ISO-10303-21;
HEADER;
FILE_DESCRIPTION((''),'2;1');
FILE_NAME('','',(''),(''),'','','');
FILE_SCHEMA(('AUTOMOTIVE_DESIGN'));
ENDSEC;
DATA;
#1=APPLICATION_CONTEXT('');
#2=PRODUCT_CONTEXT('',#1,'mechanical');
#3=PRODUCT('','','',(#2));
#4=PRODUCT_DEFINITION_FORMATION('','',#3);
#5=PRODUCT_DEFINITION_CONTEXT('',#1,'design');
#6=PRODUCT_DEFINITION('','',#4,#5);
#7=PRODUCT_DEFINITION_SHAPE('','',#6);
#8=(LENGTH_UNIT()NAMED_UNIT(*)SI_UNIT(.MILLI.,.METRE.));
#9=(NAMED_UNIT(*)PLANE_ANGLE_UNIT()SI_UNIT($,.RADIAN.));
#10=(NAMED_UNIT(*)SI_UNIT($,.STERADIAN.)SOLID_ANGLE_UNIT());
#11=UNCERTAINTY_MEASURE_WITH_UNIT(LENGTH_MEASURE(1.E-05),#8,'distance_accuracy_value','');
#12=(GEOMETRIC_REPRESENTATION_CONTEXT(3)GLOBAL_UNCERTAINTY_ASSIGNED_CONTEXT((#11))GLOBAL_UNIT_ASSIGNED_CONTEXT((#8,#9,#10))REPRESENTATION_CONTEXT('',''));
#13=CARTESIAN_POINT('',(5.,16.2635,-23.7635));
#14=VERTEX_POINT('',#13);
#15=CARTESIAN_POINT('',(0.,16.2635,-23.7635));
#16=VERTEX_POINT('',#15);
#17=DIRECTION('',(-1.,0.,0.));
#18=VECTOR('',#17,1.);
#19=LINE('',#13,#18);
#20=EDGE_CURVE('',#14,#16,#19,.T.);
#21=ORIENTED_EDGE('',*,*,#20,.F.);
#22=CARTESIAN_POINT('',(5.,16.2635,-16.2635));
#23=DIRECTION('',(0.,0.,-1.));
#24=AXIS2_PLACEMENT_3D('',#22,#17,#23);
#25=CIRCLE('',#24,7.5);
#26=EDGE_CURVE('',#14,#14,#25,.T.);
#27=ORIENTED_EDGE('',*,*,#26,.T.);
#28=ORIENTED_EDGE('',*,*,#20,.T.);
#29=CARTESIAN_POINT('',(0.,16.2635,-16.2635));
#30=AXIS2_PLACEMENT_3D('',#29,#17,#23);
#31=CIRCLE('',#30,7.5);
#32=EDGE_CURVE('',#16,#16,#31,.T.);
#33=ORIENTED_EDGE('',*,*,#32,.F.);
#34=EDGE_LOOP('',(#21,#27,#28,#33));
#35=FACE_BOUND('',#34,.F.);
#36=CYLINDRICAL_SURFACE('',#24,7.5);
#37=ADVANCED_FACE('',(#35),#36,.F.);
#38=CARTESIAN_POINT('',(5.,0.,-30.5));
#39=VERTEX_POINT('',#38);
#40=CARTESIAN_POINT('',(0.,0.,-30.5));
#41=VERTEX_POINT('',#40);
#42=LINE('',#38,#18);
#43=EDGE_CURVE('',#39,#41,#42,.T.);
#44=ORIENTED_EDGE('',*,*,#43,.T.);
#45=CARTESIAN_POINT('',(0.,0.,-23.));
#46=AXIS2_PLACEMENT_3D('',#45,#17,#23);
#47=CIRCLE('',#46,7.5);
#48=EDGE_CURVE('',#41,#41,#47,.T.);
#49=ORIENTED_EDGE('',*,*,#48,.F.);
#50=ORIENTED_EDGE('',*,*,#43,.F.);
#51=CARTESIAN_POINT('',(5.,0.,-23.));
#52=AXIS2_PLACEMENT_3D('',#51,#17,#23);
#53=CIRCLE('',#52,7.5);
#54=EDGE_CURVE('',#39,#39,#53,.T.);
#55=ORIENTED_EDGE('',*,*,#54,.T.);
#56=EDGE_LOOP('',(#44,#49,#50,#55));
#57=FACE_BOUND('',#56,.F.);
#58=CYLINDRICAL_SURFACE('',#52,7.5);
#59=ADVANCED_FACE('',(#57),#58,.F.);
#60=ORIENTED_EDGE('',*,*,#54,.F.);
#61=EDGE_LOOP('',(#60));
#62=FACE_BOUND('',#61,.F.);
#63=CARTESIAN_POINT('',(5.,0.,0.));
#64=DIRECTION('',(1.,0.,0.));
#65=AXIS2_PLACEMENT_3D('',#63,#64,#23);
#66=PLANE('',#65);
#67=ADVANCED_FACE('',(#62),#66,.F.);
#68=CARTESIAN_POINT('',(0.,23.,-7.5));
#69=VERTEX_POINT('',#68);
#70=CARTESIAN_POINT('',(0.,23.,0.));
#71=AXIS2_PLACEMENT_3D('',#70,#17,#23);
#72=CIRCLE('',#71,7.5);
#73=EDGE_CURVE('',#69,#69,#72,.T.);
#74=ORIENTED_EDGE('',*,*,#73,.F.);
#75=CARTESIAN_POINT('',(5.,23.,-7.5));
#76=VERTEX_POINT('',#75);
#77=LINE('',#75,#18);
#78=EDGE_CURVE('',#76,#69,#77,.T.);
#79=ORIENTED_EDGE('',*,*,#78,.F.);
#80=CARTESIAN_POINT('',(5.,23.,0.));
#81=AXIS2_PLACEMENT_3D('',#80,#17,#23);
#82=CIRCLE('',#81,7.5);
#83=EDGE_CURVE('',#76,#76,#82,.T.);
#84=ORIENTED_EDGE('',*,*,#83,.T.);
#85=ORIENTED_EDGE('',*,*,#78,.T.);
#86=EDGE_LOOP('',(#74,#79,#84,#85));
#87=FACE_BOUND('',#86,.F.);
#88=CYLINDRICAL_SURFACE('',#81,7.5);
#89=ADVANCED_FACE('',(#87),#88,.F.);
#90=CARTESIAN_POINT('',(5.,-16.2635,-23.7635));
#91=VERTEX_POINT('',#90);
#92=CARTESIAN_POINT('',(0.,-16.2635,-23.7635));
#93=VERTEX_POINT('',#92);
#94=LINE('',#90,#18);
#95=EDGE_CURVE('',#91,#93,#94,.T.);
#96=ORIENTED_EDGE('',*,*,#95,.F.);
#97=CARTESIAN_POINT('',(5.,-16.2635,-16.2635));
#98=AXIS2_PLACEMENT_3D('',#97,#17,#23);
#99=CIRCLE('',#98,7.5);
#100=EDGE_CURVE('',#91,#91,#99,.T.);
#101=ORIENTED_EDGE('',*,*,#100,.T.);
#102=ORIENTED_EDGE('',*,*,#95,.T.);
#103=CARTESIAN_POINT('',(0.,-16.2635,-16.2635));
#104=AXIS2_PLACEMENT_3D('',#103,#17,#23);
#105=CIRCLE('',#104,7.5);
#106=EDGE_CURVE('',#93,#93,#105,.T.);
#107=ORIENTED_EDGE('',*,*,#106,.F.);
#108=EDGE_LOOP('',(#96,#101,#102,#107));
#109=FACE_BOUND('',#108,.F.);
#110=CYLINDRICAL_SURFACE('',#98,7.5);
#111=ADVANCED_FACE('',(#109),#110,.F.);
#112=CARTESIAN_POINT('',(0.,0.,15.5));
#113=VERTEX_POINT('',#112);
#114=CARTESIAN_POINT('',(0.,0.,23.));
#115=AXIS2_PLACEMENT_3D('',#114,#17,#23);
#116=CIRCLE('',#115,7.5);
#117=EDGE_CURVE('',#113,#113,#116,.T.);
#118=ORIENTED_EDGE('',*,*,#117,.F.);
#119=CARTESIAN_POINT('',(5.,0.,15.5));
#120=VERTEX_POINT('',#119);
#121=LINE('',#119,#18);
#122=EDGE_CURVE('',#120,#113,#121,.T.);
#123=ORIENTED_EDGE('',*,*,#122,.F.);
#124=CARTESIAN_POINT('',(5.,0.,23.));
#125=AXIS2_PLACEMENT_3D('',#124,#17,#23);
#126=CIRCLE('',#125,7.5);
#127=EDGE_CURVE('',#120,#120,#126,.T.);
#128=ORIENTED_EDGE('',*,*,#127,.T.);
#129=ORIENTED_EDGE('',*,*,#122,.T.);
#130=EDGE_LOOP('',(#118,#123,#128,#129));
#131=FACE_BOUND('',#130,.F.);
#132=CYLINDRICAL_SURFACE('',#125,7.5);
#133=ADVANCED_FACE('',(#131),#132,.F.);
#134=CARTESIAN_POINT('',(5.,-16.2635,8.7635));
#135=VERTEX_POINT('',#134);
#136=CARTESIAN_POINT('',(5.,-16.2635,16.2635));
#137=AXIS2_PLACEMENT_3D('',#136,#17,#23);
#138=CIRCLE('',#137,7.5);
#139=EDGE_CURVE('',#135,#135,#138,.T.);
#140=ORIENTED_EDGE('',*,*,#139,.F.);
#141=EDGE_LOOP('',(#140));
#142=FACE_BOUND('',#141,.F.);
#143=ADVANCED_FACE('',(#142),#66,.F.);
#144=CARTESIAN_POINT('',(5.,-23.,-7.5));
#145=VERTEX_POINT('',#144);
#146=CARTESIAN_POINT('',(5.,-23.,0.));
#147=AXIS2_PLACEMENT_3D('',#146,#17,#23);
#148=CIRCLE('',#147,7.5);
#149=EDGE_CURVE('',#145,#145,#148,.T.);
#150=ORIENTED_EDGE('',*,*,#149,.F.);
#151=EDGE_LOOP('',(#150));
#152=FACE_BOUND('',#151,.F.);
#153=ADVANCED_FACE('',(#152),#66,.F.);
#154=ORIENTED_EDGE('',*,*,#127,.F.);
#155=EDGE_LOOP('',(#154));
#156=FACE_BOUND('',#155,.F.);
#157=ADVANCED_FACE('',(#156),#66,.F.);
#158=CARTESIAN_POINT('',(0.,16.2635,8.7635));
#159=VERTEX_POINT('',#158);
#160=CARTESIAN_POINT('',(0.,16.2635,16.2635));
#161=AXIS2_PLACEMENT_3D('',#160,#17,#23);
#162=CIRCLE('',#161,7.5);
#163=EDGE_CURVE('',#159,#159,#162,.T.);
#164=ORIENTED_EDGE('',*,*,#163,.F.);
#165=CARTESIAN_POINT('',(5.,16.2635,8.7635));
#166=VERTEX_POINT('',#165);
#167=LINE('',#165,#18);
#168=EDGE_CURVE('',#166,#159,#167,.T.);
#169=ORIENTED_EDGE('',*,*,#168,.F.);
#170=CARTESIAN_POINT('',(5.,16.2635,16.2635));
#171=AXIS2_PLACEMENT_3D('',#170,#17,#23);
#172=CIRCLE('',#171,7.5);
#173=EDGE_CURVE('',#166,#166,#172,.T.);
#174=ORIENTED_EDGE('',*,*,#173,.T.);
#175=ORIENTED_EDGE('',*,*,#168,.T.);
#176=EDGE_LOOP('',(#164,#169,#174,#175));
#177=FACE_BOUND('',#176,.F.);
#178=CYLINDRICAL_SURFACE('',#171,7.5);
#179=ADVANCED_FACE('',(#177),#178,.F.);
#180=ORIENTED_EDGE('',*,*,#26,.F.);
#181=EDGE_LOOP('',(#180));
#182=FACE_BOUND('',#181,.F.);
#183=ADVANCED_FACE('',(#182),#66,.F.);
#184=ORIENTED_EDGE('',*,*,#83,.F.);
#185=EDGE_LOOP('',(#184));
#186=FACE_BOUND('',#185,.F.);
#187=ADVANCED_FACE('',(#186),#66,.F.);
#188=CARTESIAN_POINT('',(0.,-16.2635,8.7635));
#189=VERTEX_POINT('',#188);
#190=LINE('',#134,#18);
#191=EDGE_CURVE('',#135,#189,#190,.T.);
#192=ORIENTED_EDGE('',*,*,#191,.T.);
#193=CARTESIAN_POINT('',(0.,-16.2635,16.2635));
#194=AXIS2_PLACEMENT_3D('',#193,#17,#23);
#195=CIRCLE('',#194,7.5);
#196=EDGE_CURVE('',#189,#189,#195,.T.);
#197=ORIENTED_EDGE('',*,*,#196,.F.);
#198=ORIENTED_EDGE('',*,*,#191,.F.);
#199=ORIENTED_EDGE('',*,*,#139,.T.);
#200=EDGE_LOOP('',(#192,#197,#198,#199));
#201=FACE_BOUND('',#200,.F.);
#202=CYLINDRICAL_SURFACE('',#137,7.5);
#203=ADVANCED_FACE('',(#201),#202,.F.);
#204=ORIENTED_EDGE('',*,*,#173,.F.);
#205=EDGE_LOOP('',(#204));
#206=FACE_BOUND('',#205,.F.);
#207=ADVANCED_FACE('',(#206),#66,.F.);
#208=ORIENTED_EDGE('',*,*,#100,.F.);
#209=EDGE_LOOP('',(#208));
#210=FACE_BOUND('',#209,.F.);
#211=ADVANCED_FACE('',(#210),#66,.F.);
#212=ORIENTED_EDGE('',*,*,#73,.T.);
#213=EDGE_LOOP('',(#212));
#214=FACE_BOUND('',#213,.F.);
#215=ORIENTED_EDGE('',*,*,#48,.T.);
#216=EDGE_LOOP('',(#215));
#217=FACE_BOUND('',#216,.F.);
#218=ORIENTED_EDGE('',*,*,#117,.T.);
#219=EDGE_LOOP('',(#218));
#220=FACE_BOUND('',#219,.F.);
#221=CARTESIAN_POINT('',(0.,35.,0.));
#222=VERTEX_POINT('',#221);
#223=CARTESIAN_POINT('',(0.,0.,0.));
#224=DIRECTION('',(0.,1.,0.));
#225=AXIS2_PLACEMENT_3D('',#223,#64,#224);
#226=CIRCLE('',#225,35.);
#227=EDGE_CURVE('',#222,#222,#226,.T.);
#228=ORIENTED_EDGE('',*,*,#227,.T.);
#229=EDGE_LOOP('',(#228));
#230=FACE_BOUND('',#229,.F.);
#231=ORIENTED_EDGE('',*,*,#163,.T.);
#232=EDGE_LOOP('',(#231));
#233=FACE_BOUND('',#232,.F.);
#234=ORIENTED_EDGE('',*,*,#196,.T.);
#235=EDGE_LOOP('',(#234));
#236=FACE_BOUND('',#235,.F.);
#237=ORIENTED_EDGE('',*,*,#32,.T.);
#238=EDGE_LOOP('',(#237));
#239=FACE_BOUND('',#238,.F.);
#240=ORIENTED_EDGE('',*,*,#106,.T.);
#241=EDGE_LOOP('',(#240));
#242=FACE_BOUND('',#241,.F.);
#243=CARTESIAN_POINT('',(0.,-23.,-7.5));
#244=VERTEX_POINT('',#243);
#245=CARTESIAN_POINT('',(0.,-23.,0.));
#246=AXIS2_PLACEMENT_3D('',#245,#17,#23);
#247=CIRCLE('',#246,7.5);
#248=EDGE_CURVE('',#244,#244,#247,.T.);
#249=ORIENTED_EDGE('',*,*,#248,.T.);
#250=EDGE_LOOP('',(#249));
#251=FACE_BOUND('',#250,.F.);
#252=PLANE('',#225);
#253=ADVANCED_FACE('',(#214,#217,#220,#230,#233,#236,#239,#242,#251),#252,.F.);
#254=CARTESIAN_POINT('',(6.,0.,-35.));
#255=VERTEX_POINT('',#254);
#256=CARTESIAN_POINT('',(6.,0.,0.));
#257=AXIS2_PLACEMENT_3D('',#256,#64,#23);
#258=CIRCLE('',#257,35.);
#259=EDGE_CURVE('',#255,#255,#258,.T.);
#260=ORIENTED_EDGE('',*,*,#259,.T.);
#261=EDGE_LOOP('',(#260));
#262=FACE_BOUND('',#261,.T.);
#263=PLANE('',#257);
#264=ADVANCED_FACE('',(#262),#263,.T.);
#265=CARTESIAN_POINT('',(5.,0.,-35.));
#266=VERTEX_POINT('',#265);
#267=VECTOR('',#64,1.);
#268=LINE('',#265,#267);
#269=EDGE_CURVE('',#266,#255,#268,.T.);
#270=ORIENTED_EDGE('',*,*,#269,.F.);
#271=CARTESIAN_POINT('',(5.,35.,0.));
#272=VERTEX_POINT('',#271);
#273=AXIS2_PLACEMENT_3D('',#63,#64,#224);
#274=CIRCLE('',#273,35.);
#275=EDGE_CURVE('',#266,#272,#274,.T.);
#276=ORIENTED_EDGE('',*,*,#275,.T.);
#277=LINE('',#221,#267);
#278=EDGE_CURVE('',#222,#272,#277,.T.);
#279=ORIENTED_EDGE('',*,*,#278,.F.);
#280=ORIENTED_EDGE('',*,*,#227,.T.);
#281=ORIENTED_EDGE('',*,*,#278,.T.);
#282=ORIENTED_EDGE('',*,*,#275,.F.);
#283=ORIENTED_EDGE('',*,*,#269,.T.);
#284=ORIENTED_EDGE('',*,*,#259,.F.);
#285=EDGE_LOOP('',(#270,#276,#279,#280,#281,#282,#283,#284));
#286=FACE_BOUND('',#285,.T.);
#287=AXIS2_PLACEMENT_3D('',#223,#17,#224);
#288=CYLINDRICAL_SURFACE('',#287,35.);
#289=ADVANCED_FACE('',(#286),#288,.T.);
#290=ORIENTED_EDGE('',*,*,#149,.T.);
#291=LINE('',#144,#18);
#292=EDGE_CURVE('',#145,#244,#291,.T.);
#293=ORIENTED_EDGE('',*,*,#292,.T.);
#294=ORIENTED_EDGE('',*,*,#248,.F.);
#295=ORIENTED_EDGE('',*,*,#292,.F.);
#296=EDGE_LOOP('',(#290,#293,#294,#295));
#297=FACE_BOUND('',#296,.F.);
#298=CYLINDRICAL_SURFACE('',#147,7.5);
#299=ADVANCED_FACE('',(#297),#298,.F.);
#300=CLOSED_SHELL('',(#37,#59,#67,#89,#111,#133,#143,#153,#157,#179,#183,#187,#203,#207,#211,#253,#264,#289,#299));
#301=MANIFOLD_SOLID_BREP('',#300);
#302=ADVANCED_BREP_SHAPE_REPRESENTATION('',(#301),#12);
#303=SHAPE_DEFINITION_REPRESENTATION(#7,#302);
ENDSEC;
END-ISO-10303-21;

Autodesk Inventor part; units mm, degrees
ref_plane "YZ Plane" through (0, 0, 0) normal (1, 0, 0) x (0, 1, 0)
ref_plane "XZ Plane" through (0, 0, 0) normal (0, 1, 0) x (-1, 0, 0)
ref_plane "XY Plane" through (0, 0, 0) normal (0, 0, 1) x (1, 0, 0)
sketch "Sketch1" plane through (0, 0, 0) normal (1, 0, 0) x (0, 1, 0)
  circle A0 centre (0, 0) radius 35
  dimension "d0" = 70
extrude "Extrusion1" add sketch "Sketch1" along normal blind 5
sketch "Sketch2" plane through (5, 0, 0) normal (1, 0, 0) x (0, 0, -1)
  circle A0 centre (0, 0) radius 35 projected
  circle A1 centre (0, 0) radius 23 construction
  point P0 (23, 0)
  point P1 (16.2635, 16.2635)
  point P2 (0, 23)
  point P3 (-16.2635, 16.2635)
  point P4 (-23, 0)
  point P5 (-16.2635, -16.2635)
  point P6 (0, -23)
  point P7 (16.2635, -16.2635)
  dimension "d3" = 46
  dimension "d6" = 360
hole "Hole1" at (5, 0, -23) at (5, 16.2635, -16.2635) at (5, 23, 0) at (5, 16.2635, 16.2635) at (5, 0, 23) at (5, -16.2635, 16.2635) at (5, -23, 0) at (5, -16.2635, -16.2635) direction (-1, 0, 0) diameter 15 end through all
sketch "Sketch3" plane through (5, 0, 0) normal (1, 0, 0) x (0, 0, -1)
  circle A0 centre (0, -23) radius 7.5 projected
  circle A1 centre (-23, 0) radius 7.5 projected
  circle A2 centre (0, 23) radius 7.5 projected
  circle A3 centre (23, 0) radius 7.5 projected
  circle A4 centre (16.2635, 16.2635) radius 7.5 projected
  circle A5 centre (-16.2635, 16.2635) radius 7.5 projected
  circle A6 centre (-16.2635, -16.2635) radius 7.5 projected
  circle A7 centre (16.2635, -16.2635) radius 7.5 projected
  circle A8 centre (0, 0) radius 35 projected
extrude "Extrusion2" add sketch "Sketch3" along normal blind 1 contours A0 | A1 | A2 | A3 | A4 | A5 | A6 | A7 | A8
properties part number "MAGNETPLATE CONCEPT"
